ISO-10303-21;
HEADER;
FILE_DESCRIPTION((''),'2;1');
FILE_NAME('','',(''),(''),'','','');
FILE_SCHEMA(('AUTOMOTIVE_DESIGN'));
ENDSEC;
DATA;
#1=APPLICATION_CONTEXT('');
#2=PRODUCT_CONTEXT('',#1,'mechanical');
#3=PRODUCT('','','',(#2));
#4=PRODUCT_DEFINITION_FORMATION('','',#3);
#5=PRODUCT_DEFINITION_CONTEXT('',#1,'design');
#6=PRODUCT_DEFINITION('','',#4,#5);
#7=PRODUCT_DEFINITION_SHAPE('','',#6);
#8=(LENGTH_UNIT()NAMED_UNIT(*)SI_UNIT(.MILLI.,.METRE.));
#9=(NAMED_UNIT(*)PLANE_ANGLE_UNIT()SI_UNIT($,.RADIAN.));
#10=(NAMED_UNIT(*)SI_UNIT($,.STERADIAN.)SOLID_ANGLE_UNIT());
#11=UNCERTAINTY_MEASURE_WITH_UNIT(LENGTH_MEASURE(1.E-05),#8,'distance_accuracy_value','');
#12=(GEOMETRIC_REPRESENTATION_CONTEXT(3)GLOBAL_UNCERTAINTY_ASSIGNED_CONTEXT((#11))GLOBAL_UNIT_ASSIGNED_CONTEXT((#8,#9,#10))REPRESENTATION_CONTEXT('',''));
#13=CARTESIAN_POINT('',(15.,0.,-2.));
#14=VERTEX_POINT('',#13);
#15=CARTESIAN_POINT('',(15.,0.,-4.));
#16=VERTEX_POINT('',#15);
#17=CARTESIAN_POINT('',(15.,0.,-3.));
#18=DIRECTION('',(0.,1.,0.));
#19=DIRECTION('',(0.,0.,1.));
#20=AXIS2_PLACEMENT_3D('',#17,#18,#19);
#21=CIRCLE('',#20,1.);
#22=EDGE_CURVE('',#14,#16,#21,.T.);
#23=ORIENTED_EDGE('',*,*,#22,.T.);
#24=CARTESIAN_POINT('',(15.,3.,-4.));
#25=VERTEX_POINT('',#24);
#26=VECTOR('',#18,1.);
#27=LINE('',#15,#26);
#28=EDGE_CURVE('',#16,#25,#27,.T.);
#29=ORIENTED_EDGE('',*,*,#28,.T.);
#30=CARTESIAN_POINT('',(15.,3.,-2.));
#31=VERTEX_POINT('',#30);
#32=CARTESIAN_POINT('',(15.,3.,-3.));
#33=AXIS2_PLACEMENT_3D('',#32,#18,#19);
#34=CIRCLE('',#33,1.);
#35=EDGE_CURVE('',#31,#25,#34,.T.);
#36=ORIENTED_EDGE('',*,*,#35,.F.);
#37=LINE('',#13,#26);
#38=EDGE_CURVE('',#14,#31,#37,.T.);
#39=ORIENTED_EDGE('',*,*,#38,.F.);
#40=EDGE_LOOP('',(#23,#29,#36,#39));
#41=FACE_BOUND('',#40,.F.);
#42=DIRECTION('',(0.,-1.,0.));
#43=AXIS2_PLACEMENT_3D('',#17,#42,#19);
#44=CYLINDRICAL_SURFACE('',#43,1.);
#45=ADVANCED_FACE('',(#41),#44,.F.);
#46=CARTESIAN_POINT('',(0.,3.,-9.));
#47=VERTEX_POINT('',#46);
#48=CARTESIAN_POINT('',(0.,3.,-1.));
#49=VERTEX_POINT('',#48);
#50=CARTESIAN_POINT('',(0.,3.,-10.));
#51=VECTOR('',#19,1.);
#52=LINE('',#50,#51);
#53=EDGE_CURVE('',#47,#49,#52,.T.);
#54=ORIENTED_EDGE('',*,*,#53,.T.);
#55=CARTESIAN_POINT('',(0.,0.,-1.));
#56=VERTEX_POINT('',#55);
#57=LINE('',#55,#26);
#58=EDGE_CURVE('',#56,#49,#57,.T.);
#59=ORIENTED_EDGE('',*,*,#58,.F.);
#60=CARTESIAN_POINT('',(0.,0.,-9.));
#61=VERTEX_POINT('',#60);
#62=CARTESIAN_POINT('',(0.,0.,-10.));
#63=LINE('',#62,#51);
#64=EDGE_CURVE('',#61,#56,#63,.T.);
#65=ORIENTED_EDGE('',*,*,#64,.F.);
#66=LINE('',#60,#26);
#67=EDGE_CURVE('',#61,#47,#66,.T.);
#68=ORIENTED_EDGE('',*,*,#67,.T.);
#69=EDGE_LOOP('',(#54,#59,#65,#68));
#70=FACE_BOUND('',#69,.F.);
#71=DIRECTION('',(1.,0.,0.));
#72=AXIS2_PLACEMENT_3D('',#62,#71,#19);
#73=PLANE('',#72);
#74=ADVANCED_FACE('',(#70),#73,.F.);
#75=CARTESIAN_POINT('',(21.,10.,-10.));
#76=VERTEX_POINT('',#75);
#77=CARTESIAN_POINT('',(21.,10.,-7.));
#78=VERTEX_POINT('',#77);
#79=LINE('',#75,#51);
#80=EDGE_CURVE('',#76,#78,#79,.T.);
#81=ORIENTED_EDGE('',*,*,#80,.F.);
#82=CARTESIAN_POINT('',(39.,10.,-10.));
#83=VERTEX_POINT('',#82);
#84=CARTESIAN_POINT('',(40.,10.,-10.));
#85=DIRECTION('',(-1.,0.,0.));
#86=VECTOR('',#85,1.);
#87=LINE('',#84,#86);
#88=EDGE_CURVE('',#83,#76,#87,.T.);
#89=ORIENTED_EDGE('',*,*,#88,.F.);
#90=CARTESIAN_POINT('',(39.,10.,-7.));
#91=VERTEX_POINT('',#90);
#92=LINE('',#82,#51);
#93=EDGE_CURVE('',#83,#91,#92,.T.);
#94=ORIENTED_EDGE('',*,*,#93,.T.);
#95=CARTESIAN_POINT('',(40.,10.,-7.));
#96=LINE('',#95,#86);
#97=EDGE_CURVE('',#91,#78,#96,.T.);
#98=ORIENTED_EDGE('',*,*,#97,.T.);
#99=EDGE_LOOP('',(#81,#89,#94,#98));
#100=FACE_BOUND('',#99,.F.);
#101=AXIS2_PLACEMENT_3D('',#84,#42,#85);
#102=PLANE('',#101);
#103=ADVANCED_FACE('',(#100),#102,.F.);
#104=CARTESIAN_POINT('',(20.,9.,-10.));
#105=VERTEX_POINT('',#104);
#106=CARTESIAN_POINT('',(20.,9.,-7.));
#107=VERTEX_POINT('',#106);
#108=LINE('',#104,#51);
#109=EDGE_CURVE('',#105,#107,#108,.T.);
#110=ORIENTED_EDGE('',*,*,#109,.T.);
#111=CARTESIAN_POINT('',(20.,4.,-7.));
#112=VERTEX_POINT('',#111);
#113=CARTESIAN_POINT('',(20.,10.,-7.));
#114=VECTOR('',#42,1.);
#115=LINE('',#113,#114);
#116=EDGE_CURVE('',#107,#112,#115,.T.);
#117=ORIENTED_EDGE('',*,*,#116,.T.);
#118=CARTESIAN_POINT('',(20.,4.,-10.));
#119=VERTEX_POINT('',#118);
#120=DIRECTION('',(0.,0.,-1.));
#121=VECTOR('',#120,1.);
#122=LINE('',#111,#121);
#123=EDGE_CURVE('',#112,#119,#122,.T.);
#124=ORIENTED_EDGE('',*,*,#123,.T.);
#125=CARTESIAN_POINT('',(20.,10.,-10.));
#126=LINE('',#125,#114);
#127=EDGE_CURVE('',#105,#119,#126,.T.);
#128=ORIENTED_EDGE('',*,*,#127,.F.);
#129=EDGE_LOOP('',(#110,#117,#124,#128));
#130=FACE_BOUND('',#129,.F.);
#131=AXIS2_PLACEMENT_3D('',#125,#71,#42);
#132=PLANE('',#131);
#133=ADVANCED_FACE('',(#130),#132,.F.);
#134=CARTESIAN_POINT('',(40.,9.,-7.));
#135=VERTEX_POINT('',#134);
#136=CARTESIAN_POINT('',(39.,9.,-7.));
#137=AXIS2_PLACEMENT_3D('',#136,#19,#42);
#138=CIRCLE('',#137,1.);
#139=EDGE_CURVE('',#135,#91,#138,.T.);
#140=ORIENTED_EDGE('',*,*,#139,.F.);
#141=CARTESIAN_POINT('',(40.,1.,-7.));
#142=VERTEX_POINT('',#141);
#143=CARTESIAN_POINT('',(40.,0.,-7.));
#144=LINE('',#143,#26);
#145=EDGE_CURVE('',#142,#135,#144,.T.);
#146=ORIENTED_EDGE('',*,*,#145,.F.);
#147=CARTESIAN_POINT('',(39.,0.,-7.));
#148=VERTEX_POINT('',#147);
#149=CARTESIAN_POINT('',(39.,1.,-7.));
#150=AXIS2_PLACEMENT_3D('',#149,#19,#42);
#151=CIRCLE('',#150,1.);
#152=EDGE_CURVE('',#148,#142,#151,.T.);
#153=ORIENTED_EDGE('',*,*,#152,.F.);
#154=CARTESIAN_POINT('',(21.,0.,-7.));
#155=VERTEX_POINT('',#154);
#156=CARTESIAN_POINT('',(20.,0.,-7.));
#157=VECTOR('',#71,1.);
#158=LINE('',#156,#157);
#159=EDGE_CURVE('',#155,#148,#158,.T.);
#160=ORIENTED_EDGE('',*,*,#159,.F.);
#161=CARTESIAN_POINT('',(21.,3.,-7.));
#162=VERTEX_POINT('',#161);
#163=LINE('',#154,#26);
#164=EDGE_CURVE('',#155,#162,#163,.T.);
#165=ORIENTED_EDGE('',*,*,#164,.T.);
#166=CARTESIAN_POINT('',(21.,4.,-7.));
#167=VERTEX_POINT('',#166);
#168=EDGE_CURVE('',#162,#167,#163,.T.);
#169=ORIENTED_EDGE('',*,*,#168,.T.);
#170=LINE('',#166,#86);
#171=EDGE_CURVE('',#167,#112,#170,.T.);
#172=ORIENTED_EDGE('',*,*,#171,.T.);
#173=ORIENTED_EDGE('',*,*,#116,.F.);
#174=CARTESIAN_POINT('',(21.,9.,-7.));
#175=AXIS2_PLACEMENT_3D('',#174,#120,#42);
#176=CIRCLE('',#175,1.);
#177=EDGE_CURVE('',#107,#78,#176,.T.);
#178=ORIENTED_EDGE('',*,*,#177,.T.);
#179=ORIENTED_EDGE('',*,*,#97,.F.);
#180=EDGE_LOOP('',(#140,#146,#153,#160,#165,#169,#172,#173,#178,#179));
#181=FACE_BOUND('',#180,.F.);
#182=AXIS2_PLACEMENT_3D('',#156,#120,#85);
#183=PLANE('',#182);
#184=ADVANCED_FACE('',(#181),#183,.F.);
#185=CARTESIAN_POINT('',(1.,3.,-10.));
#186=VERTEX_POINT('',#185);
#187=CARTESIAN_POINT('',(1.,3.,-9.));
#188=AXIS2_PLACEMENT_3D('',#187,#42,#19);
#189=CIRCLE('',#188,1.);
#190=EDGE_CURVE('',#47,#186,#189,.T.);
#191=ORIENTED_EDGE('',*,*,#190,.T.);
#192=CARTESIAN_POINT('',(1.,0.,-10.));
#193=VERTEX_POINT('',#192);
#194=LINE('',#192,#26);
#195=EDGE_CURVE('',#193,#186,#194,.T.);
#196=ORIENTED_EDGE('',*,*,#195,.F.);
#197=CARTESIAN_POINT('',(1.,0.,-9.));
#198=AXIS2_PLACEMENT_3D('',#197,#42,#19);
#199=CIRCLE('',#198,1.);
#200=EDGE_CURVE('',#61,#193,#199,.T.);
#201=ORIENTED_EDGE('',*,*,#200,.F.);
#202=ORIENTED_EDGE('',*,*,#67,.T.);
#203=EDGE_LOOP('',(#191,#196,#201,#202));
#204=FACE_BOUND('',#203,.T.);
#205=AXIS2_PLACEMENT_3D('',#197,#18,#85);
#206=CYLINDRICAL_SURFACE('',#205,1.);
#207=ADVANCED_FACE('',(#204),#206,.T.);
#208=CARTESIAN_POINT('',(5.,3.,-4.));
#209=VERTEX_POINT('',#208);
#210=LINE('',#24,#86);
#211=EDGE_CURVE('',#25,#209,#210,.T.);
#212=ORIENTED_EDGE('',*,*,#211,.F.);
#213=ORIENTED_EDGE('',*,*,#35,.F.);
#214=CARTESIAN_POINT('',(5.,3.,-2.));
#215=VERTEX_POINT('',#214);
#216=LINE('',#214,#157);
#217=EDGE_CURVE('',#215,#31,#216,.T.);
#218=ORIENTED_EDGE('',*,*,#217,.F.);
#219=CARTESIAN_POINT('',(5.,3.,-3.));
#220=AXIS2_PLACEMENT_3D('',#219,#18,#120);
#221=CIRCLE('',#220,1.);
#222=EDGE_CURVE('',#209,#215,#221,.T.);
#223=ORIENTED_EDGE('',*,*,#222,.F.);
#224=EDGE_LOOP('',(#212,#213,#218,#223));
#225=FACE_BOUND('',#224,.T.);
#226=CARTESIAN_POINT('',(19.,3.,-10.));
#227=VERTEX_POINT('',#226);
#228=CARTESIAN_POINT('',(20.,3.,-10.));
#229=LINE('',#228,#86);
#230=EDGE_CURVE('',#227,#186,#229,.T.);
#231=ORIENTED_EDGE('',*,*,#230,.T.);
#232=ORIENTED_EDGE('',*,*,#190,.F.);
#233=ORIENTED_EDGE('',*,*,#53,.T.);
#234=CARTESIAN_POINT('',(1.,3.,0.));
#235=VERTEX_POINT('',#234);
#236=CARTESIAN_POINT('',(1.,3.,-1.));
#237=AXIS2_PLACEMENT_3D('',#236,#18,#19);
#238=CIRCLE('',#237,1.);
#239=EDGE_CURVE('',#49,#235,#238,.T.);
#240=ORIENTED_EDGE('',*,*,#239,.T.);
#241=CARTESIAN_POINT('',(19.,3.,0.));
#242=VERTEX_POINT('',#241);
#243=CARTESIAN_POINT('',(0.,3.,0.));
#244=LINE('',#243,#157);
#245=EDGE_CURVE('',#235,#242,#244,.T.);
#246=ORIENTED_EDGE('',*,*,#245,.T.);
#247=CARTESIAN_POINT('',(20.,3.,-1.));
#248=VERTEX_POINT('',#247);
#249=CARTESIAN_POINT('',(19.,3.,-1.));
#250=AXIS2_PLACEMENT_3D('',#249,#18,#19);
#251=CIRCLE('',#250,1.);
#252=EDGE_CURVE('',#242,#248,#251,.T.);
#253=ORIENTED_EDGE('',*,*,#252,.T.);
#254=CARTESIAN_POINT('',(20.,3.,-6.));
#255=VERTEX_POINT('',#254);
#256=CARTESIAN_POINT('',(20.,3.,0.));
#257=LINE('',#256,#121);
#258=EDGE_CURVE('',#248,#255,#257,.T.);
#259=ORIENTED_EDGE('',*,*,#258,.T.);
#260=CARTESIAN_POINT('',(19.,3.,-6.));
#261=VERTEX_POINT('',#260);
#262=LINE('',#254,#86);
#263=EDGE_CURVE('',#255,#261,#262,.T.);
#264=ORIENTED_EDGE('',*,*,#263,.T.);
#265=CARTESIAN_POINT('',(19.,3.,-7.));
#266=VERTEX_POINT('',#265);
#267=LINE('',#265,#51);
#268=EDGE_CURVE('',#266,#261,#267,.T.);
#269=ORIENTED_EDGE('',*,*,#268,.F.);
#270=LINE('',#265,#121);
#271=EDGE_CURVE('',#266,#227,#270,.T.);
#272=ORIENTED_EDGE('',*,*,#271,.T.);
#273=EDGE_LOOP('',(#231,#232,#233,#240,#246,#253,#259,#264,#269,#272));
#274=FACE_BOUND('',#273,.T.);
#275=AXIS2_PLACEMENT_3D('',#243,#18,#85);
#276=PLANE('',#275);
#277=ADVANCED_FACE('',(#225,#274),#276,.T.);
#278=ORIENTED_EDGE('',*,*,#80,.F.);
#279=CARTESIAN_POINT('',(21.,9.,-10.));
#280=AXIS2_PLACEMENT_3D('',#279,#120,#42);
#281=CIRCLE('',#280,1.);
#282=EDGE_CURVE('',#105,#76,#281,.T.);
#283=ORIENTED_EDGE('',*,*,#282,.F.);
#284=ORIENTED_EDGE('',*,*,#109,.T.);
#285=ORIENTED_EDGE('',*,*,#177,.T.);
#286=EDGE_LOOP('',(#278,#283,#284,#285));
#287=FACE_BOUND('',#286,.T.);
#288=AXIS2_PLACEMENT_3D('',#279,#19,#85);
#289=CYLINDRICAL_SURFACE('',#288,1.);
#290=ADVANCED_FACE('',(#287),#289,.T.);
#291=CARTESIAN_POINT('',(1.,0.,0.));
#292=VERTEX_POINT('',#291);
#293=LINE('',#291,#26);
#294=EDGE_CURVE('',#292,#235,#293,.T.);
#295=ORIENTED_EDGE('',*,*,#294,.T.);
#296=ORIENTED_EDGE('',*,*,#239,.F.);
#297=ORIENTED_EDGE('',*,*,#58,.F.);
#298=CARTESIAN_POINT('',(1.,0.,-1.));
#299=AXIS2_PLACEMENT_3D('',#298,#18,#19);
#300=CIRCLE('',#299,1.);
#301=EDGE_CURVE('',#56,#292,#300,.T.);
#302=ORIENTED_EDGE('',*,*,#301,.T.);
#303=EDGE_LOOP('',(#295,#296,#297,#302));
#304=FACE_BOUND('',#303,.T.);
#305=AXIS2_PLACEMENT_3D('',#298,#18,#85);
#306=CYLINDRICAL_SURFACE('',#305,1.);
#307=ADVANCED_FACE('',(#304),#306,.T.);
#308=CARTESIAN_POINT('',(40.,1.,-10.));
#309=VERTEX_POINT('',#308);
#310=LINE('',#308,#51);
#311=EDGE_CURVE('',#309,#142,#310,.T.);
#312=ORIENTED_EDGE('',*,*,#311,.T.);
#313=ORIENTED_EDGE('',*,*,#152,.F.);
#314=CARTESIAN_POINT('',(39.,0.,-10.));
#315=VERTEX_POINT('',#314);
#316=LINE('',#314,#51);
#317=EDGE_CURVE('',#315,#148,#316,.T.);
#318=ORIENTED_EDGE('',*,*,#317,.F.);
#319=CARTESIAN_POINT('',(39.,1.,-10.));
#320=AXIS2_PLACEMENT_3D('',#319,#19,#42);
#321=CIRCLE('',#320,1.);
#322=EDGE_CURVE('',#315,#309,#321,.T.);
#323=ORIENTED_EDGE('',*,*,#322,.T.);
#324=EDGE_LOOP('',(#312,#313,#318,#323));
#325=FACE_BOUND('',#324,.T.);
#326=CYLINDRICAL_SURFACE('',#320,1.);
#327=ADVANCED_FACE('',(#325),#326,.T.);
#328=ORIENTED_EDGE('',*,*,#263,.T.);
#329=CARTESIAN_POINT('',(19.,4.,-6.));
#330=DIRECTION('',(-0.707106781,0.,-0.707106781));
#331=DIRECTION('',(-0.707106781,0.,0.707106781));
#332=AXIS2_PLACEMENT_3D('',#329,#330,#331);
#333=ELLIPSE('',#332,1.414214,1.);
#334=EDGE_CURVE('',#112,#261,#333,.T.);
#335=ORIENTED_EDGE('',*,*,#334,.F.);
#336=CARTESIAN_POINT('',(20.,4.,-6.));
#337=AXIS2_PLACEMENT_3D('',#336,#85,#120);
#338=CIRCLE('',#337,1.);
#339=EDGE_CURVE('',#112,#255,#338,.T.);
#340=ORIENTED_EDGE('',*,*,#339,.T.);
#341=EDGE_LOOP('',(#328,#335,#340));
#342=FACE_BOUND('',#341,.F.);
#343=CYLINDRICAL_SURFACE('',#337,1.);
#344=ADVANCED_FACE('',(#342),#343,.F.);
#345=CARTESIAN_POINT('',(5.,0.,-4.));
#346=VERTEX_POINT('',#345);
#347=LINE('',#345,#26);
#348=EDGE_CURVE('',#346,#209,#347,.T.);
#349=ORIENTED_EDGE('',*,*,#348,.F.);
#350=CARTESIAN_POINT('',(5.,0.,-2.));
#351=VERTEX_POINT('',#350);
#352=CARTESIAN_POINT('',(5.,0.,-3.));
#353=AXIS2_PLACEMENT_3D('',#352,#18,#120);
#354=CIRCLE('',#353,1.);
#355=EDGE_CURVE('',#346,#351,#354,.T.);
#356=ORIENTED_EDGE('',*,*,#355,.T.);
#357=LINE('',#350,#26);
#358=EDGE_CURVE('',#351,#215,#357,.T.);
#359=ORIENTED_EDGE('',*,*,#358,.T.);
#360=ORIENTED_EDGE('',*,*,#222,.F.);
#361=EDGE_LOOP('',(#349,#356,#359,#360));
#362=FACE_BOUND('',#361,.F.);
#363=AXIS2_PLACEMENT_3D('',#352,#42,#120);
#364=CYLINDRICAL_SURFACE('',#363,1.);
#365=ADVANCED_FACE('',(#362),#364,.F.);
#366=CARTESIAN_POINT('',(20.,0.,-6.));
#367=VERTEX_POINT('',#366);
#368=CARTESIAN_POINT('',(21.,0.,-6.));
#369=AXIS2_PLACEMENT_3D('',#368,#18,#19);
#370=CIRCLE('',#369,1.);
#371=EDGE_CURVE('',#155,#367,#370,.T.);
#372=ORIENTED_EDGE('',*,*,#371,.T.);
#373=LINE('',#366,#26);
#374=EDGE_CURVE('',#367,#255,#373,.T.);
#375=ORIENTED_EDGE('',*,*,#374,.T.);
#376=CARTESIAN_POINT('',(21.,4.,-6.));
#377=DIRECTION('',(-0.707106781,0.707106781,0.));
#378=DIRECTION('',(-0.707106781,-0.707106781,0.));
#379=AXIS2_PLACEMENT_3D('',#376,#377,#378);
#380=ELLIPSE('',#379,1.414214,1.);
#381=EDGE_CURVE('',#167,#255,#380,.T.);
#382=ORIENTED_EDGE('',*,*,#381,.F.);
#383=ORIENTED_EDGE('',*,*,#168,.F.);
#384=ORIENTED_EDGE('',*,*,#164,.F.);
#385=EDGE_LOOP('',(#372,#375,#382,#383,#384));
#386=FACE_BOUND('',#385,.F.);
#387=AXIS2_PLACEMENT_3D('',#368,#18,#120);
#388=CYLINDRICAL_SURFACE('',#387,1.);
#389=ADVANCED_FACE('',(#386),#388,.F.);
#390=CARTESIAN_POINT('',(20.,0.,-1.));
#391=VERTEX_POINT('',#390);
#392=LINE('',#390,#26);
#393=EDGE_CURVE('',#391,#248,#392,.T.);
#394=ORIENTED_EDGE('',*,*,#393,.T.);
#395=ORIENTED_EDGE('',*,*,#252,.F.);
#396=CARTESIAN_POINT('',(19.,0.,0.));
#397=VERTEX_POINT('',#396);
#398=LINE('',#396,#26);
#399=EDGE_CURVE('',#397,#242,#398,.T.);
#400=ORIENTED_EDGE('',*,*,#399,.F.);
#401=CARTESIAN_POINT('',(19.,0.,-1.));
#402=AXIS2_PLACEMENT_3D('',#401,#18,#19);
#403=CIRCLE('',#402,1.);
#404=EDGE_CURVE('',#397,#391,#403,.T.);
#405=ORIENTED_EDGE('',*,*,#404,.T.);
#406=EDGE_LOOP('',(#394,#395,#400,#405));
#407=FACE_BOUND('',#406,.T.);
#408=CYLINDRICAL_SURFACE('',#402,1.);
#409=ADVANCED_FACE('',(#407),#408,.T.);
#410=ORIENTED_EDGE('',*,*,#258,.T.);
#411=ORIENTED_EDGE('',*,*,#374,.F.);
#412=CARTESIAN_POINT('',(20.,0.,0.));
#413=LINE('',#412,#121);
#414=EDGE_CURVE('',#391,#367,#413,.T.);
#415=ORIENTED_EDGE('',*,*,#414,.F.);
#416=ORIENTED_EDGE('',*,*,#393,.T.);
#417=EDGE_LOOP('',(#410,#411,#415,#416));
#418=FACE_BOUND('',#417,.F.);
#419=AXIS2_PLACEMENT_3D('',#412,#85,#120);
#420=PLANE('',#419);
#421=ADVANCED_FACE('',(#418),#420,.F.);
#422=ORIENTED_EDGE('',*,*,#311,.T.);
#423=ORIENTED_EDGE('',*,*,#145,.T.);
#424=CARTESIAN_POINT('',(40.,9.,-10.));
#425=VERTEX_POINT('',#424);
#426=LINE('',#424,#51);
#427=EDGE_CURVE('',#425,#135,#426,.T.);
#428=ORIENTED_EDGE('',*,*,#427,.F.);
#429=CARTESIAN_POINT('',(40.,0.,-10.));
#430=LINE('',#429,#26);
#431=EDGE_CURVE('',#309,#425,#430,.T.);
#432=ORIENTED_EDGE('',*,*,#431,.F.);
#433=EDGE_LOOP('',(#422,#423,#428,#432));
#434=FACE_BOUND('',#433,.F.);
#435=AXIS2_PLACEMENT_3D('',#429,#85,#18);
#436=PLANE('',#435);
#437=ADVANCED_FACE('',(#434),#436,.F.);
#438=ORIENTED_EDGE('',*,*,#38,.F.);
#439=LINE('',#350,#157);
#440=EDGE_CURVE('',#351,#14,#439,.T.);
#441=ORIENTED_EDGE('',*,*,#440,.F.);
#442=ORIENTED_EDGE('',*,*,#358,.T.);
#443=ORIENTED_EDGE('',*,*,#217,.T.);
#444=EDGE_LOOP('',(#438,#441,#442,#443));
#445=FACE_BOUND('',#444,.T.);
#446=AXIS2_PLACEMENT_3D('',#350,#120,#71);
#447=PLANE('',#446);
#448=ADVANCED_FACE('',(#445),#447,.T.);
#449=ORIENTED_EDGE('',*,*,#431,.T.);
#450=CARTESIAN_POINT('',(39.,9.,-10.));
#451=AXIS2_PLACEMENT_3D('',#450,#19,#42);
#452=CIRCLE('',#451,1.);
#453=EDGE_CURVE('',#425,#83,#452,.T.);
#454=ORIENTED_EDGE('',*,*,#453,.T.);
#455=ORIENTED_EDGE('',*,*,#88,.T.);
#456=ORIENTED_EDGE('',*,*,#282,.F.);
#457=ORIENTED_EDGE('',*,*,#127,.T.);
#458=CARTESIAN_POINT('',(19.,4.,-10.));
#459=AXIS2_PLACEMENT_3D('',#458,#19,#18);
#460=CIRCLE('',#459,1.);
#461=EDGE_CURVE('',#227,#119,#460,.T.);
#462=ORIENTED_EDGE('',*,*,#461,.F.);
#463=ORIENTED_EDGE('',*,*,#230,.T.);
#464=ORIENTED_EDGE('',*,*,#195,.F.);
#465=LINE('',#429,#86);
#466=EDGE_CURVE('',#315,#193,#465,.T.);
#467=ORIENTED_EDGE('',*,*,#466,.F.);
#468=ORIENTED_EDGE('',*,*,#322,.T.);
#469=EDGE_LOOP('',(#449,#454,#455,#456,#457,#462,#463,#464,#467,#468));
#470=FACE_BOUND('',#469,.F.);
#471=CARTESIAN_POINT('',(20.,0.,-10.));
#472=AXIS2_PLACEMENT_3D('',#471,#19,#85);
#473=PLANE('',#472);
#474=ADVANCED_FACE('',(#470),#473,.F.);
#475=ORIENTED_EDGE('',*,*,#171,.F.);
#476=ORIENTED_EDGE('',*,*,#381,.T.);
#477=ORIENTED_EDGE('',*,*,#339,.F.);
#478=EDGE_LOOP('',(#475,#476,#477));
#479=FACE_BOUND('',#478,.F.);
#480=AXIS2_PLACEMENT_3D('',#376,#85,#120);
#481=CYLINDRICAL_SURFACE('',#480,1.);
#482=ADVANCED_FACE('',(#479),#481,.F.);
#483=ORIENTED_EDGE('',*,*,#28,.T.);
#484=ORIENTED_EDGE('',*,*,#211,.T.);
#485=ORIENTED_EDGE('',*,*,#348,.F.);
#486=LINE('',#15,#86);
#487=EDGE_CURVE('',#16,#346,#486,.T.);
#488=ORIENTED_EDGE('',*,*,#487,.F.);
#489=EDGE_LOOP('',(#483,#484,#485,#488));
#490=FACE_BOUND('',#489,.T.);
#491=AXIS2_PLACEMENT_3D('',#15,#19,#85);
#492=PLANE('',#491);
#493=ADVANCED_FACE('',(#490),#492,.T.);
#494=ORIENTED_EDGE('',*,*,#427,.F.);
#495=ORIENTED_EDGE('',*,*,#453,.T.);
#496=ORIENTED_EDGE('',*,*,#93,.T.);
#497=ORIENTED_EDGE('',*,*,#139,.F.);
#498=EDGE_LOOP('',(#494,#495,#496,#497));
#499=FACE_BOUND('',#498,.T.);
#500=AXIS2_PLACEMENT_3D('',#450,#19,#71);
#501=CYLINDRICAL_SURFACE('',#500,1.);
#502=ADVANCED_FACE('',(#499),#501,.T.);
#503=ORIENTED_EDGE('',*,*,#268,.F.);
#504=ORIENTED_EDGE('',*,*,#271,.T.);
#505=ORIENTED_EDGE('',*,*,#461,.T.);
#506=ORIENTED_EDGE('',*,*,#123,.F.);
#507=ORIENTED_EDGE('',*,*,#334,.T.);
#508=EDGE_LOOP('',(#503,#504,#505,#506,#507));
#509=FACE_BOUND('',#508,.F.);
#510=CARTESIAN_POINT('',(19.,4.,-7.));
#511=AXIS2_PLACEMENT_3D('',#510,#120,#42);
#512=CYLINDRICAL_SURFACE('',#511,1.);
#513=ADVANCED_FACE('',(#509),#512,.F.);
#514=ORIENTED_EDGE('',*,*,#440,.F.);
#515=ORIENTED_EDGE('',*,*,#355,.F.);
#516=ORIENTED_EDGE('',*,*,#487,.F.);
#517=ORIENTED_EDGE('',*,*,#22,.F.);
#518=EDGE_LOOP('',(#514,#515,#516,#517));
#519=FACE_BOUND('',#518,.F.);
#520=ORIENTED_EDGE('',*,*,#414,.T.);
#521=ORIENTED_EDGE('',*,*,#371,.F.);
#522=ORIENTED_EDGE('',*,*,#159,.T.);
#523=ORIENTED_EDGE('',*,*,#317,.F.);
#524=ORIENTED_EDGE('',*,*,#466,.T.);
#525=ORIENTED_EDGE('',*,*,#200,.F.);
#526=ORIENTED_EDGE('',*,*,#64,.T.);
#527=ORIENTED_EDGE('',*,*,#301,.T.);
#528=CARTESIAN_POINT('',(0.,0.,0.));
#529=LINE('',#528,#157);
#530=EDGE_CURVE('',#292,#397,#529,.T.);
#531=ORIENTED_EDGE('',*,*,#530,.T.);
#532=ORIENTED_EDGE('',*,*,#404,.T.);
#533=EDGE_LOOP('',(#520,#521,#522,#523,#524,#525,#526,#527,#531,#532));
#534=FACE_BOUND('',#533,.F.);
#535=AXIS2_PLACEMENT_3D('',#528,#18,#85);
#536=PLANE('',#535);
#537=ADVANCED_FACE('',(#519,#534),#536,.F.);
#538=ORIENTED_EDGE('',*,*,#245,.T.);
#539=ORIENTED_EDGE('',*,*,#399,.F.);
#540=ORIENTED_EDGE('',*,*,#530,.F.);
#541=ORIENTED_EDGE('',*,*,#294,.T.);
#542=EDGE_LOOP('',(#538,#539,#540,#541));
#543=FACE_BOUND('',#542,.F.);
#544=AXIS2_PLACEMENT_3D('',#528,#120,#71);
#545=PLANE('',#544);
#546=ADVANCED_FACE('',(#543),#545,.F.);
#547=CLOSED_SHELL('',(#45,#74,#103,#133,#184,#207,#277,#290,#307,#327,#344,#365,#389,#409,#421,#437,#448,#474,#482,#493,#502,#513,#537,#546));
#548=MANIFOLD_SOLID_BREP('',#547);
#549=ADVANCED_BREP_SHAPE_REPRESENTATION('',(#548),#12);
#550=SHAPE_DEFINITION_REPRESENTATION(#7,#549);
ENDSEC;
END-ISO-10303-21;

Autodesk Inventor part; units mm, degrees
ref_plane "YZ Plane" through (0, 0, 0) normal (1, 0, 0) x (0, 1, 0)
ref_plane "XZ Plane" through (0, 0, 0) normal (0, 1, 0) x (-1, 0, 0)
ref_plane "XY Plane" through (0, 0, 0) normal (0, 0, 1) x (1, 0, 0)
sketch "Sketch1" plane through (0, 0, 0) normal (0, 1, 0) x (-1, 0, 0)
  line L0 (0, 0) -> (-20, 0)
  line L1 (-20, 0) -> (-20, -10)
  line L2 (-20, -10) -> (0, -10)
  line L3 (0, -10) -> (0, 0)
  line L4 (-15, -3) -> (-5, -3) construction
  line L5 (-15, -4) -> (-5, -4)
  line L6 (-5, -2) -> (-15, -2)
  arc A0 (-15, -2) -> (-15, -4) centre (-15, -3) ccw
  arc A1 (-5, -4) -> (-5, -2) centre (-5, -3) ccw
  point P0 (-10, -3)
  point P1 (-10, -10)
  point P2 (-20, -5)
  dimension "d0" = 20
  dimension "d1" = 10
  dimension "d2" = 2
  dimension "d3" = 10
  dimension "d10" = 2
extrude "Extrusion1" add sketch "Sketch1" along normal blind 3
sketch "Sketch2" plane through (20, 0, -10) normal (0, 0, -1) x (-1, 0, 0)
  line L0 (0, 0) -> (0, 3) projected
  line L1 (0, 0) -> (-20, 0)
  line L2 (-20, 0) -> (-20, 10)
  line L3 (-20, 10) -> (0, 10)
  line L4 (0, 10) -> (0, 0)
  point P0 (20, 0)
  point P1 (0, 3)
  dimension "d6" = 10
  dimension "d7" = 20
extrude "Extrusion2" add sketch "Sketch2" against normal blind 3
fillet "Fillet1" radius 1 5 edges at (0, 1.5, -10) (0, 1.5, 0) (20, 1.5, 0) (20, 3, -8.5) (20, 1.5, -7)
fillet "Fillet2" radius 1 2 edges at (19.5, 3, -7) (20.5, 3, -7)
fillet "Fillet3" radius 1 3 edges at (20, 10, -8.5) (40, 10, -8.5) (40, 0, -8.5)
properties part number "servo attachment"
